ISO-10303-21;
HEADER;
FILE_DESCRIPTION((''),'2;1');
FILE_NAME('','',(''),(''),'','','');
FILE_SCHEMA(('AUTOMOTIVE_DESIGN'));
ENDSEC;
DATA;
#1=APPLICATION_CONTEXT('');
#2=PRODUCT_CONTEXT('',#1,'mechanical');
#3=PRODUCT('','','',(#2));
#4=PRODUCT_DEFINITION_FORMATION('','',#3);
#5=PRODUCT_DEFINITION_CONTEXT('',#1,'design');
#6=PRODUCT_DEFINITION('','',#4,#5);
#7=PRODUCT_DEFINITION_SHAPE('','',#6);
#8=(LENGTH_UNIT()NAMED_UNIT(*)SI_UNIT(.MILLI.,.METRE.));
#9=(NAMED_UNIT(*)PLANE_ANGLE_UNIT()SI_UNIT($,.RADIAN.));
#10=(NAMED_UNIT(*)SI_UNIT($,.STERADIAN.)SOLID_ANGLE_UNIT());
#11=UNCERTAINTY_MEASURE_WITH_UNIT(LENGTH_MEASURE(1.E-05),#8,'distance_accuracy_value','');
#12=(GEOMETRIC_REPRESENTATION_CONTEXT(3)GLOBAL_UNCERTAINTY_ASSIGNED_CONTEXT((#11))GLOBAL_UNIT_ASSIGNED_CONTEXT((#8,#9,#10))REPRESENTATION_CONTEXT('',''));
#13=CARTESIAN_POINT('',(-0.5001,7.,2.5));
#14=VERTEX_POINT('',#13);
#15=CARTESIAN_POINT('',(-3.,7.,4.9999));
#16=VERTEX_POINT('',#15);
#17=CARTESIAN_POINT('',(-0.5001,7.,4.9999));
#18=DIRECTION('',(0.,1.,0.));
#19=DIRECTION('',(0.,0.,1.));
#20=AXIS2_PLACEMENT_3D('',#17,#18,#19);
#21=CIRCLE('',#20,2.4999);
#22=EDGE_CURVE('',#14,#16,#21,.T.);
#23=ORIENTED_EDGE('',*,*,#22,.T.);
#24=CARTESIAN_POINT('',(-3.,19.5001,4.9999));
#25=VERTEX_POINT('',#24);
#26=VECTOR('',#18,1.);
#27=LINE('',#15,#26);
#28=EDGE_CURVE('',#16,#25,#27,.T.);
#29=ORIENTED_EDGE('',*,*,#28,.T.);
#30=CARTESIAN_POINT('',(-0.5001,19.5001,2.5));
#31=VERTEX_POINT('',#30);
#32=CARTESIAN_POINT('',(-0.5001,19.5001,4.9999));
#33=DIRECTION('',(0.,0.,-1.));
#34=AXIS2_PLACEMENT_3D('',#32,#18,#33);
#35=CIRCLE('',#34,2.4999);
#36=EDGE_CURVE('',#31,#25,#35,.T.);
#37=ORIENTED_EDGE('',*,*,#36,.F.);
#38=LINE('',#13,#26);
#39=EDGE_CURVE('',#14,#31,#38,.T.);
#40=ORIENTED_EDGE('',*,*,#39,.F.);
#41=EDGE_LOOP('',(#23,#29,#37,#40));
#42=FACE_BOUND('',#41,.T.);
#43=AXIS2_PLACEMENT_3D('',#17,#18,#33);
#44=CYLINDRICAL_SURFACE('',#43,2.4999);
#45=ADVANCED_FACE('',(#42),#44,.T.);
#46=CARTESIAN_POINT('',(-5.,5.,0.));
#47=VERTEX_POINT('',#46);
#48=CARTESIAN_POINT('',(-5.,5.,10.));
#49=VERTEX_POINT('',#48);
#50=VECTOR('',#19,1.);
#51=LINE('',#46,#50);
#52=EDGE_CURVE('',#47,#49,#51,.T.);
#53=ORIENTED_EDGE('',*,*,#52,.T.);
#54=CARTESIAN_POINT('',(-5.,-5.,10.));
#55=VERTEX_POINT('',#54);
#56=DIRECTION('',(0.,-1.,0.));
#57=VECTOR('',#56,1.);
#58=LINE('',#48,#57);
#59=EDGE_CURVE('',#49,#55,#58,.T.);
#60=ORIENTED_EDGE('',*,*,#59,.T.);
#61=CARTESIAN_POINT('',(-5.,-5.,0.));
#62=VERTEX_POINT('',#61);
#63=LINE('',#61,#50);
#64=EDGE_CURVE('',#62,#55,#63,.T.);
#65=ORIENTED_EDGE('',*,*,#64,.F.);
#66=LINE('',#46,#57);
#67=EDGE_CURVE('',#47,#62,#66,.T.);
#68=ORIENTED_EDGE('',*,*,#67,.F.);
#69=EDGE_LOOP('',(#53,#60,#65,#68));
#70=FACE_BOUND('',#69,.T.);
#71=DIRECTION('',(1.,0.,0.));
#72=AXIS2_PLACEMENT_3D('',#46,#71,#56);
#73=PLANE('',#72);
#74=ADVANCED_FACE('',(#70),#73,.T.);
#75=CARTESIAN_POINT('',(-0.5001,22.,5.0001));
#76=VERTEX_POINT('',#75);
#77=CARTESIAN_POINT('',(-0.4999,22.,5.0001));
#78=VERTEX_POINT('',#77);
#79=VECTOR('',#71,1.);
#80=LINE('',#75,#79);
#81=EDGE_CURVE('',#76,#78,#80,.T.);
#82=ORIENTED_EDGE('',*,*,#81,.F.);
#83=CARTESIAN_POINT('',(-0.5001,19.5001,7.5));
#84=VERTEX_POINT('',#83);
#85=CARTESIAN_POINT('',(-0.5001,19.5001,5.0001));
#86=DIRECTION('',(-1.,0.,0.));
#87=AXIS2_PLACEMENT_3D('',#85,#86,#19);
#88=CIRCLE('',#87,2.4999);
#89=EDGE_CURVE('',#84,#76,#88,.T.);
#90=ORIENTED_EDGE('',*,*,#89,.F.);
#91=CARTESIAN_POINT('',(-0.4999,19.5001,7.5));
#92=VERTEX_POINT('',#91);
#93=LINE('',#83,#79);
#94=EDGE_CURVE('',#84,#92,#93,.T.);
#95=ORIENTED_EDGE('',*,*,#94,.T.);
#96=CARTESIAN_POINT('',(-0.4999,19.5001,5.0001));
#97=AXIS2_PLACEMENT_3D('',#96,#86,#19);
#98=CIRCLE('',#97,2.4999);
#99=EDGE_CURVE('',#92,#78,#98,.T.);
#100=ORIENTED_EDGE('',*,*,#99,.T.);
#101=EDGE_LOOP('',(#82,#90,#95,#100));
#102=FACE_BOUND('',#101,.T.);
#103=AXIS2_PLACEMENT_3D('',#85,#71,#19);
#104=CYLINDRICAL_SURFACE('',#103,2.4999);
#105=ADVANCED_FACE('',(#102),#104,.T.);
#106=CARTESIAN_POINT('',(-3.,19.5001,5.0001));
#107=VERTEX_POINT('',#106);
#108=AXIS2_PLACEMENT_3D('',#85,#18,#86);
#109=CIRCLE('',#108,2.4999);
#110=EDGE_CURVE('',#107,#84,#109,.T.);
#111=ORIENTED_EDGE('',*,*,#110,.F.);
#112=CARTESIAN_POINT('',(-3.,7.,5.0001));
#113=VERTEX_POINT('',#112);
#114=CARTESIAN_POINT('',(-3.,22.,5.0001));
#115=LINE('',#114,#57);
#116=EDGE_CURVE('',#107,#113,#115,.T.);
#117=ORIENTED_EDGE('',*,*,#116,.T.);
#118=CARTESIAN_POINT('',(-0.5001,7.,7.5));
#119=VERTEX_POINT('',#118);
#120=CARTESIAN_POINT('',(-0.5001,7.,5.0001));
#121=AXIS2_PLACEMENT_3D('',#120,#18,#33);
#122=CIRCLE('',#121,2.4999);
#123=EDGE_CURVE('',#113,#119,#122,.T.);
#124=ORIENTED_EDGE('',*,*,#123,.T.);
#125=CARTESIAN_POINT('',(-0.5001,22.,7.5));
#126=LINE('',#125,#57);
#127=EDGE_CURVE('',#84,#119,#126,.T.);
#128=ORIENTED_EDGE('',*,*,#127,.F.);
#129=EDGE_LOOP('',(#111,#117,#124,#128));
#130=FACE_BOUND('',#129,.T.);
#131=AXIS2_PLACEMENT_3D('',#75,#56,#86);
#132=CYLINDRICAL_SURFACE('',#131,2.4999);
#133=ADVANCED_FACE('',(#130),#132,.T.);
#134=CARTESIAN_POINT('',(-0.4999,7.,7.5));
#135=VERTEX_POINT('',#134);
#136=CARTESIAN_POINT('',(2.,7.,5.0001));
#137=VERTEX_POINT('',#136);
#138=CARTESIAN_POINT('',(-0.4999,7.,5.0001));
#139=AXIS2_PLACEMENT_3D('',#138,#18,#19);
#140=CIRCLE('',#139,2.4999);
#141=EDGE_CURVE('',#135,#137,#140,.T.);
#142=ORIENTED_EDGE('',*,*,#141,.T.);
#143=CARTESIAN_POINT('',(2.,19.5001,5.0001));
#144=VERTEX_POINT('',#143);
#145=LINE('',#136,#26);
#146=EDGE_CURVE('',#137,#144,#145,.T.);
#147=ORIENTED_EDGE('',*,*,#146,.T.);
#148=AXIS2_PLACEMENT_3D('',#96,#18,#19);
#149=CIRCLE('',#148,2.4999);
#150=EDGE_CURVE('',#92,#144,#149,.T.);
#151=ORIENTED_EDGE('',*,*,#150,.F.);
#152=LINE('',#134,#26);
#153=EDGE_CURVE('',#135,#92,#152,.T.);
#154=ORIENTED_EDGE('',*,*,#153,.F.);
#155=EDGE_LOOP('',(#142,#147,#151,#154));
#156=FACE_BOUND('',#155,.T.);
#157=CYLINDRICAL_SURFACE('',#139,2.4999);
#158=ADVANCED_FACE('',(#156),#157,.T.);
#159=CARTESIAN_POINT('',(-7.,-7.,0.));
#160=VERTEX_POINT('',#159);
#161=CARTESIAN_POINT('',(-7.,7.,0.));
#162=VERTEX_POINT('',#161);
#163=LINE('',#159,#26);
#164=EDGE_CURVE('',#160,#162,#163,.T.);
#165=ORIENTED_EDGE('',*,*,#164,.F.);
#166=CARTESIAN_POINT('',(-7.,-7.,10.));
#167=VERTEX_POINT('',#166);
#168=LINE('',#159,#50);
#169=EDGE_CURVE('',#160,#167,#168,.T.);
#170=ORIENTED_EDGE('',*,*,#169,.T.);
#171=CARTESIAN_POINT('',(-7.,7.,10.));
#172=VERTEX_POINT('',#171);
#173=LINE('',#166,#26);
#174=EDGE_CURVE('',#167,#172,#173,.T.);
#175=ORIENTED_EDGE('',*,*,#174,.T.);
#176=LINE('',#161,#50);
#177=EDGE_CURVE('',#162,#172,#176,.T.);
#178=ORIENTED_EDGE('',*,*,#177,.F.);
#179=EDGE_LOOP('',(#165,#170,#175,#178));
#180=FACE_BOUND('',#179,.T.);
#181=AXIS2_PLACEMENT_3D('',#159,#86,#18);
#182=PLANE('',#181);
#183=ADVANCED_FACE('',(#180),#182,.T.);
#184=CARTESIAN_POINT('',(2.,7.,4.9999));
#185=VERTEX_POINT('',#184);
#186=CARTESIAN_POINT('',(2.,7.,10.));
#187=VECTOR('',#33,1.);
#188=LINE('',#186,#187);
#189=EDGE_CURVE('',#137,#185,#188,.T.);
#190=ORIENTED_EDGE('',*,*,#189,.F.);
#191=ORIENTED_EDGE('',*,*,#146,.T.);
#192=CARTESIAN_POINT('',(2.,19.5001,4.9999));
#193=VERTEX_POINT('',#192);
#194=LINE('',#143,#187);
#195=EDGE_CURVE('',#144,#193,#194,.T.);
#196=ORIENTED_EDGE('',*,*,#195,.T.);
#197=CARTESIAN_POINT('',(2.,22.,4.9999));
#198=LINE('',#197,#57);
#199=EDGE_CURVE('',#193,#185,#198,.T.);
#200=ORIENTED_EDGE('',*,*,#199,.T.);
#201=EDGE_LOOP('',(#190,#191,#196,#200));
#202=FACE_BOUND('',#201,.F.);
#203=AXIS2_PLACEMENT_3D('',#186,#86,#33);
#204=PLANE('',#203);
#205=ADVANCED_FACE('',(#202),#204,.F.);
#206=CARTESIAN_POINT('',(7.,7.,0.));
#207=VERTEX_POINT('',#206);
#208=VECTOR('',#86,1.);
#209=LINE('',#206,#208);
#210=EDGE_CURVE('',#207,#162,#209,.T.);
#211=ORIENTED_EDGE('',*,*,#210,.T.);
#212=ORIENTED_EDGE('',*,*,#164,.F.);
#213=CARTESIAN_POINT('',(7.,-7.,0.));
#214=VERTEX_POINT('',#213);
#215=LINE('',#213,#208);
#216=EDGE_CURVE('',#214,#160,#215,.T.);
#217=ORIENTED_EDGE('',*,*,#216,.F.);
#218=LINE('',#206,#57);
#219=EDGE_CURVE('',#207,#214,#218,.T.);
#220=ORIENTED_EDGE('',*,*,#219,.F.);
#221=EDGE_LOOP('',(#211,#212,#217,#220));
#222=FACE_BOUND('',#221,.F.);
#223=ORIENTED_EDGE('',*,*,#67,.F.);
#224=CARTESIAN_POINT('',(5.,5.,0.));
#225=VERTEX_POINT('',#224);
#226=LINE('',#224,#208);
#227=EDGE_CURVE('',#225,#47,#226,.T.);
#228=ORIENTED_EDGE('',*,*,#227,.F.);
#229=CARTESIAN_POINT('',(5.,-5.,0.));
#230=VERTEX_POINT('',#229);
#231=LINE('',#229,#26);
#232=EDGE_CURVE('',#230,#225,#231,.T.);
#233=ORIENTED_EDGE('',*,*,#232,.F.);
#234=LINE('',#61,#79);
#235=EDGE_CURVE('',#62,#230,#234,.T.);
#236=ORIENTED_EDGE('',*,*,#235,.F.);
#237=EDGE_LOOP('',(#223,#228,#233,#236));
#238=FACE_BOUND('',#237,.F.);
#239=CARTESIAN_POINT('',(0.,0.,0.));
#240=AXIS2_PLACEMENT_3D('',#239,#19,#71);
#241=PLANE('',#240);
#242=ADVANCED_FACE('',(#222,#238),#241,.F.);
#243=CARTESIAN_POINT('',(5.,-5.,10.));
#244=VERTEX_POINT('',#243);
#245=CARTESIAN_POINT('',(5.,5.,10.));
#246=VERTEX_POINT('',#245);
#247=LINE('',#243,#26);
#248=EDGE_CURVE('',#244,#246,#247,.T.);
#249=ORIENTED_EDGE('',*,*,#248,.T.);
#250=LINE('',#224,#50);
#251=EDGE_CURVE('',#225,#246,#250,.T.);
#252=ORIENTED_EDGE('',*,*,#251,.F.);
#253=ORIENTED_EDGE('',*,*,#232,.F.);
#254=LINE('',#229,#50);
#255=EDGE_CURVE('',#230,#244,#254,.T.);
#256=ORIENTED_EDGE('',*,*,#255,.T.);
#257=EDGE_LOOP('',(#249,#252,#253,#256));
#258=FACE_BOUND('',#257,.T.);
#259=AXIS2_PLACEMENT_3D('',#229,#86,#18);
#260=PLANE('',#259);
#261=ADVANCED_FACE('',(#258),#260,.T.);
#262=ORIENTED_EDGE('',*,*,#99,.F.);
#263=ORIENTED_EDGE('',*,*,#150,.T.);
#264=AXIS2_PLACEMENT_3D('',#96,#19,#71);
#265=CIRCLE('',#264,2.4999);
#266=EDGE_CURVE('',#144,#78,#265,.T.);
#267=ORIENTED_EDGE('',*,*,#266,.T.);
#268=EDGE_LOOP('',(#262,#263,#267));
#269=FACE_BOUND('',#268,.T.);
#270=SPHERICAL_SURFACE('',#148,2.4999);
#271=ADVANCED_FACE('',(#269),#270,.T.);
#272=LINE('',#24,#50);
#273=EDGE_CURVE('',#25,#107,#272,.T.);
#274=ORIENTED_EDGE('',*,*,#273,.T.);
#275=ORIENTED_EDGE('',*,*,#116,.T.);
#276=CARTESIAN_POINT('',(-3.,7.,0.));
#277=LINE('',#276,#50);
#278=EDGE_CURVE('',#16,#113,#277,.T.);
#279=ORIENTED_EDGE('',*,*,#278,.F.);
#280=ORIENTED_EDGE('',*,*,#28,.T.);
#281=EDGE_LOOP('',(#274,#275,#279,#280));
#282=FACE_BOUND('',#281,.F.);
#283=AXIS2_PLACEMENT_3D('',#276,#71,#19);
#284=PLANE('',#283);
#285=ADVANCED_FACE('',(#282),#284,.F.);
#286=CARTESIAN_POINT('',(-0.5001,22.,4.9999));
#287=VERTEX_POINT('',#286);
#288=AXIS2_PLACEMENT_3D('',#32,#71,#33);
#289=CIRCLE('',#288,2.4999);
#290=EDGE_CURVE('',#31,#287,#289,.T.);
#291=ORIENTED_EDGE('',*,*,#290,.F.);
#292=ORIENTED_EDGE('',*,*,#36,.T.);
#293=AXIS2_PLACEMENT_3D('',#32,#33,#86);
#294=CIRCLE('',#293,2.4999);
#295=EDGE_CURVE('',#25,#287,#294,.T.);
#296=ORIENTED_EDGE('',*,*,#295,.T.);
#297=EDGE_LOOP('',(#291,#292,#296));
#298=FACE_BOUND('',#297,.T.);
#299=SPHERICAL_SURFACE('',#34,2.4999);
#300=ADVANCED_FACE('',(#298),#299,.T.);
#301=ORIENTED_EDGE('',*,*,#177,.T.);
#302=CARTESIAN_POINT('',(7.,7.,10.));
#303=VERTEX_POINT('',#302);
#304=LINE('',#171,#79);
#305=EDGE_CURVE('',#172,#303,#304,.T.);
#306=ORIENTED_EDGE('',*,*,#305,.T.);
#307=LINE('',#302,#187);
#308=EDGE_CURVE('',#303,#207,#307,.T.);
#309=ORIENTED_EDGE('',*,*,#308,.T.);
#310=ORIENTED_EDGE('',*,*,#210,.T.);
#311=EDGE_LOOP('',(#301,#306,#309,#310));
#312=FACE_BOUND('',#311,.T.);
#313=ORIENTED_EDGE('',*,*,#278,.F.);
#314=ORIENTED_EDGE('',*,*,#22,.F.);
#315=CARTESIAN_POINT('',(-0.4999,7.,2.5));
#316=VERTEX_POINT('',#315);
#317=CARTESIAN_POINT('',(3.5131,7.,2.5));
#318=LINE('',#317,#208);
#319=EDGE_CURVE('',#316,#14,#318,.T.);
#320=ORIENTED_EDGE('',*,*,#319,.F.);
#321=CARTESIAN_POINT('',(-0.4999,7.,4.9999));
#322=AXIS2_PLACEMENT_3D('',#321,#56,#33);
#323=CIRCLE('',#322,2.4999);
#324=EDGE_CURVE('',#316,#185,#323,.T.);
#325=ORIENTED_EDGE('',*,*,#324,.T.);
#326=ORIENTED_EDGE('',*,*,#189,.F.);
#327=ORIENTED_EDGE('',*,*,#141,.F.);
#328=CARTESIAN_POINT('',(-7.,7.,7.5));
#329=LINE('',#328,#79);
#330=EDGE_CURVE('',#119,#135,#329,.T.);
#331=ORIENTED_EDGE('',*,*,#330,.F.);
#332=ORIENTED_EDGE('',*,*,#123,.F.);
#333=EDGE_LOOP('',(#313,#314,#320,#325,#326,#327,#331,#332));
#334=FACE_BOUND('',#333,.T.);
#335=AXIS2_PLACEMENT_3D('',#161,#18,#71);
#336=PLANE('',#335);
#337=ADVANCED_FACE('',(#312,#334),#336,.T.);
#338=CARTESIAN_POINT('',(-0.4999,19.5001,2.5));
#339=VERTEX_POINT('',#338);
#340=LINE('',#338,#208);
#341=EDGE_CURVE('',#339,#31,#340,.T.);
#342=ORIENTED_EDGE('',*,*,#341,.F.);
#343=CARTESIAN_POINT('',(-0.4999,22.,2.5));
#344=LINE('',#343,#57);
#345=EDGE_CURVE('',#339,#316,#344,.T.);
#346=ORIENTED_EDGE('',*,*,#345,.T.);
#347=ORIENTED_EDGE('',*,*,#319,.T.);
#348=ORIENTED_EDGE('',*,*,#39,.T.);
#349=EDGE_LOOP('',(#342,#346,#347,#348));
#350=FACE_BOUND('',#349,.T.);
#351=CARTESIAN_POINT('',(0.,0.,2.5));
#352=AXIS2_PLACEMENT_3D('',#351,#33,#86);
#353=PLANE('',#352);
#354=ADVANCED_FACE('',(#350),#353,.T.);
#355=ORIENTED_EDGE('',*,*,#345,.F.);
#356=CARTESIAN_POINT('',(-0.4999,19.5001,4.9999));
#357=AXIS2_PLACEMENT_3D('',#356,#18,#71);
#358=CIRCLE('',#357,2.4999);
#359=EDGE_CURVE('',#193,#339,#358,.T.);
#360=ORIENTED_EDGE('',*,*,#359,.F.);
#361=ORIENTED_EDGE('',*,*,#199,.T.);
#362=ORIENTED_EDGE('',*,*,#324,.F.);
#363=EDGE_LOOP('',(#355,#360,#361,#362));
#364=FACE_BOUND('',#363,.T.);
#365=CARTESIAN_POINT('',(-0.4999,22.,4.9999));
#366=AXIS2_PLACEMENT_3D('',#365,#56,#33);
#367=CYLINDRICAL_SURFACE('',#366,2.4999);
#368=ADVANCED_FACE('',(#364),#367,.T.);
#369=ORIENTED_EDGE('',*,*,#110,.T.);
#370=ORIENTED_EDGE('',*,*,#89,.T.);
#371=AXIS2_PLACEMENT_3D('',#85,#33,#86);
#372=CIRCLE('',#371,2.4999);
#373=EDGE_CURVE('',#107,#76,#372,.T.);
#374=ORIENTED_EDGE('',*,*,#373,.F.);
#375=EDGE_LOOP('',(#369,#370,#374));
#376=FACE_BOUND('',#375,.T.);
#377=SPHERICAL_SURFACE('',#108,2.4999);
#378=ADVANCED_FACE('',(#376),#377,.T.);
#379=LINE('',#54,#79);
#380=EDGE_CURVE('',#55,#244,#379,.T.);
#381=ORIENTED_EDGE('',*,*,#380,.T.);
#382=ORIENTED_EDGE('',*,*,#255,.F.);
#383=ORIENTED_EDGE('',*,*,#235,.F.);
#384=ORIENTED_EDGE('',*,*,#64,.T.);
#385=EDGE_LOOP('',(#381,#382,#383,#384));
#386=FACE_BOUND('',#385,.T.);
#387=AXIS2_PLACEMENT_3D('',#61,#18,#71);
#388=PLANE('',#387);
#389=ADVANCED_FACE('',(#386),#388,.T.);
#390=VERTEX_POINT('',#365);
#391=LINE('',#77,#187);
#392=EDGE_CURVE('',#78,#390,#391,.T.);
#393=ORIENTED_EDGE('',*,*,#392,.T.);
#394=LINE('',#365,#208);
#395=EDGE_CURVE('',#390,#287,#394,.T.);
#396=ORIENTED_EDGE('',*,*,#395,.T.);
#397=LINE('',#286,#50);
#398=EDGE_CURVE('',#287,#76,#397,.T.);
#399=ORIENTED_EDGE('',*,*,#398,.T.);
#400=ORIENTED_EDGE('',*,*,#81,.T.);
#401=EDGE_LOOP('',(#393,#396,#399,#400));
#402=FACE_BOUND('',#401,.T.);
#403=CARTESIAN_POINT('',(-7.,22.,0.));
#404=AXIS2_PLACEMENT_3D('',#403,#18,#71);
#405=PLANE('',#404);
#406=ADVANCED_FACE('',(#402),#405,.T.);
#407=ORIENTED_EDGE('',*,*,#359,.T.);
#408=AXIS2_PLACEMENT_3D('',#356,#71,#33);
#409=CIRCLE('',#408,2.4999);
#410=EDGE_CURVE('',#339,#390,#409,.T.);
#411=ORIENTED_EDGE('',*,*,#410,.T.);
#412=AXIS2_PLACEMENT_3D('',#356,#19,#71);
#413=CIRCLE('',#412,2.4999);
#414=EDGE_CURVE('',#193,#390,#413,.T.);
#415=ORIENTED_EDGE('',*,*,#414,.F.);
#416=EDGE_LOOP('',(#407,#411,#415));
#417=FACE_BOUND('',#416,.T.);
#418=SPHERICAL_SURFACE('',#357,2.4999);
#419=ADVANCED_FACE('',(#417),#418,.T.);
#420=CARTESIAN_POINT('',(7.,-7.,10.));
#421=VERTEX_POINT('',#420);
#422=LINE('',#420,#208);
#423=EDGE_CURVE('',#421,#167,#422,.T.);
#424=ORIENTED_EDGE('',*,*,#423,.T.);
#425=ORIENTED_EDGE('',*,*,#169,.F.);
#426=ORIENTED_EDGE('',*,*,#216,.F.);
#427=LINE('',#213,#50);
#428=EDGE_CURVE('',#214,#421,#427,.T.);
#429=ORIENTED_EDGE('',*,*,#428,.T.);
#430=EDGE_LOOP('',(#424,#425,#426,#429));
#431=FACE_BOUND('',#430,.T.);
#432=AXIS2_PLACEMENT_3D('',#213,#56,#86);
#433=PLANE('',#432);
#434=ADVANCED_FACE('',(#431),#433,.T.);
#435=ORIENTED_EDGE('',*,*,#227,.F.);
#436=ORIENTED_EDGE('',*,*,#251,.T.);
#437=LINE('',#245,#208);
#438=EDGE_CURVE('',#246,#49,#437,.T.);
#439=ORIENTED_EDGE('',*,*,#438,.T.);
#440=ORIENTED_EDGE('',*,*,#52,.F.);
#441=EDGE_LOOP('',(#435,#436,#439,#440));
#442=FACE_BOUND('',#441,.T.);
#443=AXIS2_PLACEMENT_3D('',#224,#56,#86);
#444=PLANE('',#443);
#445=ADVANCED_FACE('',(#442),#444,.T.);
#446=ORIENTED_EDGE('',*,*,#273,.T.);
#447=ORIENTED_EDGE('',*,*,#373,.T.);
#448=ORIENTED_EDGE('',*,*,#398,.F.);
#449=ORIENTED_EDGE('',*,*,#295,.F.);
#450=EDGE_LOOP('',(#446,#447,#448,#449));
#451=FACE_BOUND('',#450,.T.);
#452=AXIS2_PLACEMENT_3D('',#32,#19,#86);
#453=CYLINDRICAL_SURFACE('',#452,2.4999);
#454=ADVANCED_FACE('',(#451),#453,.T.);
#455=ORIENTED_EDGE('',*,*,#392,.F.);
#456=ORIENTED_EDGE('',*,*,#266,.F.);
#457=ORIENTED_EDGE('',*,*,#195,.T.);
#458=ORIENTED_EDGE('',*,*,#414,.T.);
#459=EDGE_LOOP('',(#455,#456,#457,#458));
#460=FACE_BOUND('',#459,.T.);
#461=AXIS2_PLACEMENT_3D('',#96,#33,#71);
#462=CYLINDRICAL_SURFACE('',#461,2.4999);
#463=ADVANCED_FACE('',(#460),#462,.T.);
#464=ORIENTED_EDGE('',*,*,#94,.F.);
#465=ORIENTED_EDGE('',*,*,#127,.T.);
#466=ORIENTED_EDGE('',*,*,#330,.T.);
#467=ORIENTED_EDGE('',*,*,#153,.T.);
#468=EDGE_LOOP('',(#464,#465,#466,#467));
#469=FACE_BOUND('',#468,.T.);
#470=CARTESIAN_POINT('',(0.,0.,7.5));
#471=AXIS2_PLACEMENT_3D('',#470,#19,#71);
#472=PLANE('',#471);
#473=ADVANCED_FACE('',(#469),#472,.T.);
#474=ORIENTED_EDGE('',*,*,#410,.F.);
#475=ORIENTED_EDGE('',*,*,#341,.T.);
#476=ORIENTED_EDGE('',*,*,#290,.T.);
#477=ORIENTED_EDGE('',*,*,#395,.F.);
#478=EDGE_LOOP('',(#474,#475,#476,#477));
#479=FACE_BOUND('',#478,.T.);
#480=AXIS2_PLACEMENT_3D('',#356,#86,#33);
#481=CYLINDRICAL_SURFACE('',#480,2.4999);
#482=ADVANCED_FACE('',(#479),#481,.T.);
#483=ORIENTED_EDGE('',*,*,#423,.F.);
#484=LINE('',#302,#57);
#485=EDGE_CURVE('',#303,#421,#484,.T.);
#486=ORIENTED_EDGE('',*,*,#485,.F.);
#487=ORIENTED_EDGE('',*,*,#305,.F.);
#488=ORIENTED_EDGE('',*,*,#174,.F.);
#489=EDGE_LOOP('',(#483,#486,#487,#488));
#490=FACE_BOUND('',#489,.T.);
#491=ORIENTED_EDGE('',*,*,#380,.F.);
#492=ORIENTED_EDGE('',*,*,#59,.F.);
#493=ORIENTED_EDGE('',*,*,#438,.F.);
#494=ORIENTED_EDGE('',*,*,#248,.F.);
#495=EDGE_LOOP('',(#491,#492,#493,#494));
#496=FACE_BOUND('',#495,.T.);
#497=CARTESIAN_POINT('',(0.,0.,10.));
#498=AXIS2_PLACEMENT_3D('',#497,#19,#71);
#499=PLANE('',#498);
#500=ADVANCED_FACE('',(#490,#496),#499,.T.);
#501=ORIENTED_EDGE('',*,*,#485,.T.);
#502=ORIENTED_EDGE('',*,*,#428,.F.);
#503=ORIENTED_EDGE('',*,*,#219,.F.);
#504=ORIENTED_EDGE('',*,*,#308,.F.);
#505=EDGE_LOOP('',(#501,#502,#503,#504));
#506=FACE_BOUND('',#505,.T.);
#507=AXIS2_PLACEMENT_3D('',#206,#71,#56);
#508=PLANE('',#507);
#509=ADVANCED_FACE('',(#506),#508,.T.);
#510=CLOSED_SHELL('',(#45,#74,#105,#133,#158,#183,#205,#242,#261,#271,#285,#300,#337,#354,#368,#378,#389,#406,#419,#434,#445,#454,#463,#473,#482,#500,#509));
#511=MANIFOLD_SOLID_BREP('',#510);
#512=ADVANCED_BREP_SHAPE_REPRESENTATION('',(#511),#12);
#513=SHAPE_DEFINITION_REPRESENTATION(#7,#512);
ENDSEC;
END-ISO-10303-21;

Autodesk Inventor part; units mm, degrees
ref_plane "YZ Plane" through (0, 0, 0) normal (1, 0, 0) x (0, 1, 0)
ref_plane "XZ Plane" through (0, 0, 0) normal (0, 1, 0) x (-1, 0, 0)
ref_plane "XY Plane" through (0, 0, 0) normal (0, 0, 1) x (1, 0, 0)
sketch "草圖1" plane through (0, 0, 0) normal (0, 0, 1) x (1, 0, 0)
  line L0 (-5, -5) -> (5, -5)
  line L1 (5, -5) -> (5, 5)
  line L2 (5, 5) -> (-5, 5)
  line L3 (-5, 5) -> (-5, -5)
  line L4 (-5, -5) -> (5, 5) construction
  line L5 (5, -5) -> (-5, 5) construction
  line L6 (-7, 7) -> (7, 7)
  line L7 (7, 7) -> (7, -7)
  line L8 (7, -7) -> (-7, -7)
  line L9 (-7, -7) -> (-7, 7)
  point P0 (0, 0)
  dimension "d0" = 10
  dimension "d1" = 10
  dimension "d2" = 2
extrude "擠出1" add sketch "草圖1" along normal blind 10
sketch "草圖2" plane through (-7, 7, 0) normal (0, 1, 0) x (1, 0, 0)
  line L0 (2, -10) -> (12, -10) projected
  line L1 (12, 0) -> (2, 0) projected
  line L2 (4, -10) -> (9, -10)
  line L3 (9, -10) -> (9, 0)
  line L4 (9, 0) -> (4, 0)
  line L5 (4, 0) -> (4, -10)
  line L6 (14, 0) -> (14, -10) projected
  point P0 (7, 0)
  dimension "d5" = 5
  dimension "d6" = 5
extrude "擠出2" add sketch "草圖2" along normal blind 15
sketch "草圖3" plane through (0, 0, 10) normal (0, 0, 1) x (1, 0, 0)
  line L0 (-7, 7) -> (-3, 7) projected
  line L1 (-7, 7) -> (8.7829, 7)
  line L2 (8.7829, 7) -> (8.7829, 28.6907)
  line L3 (8.7829, 28.6907) -> (-7, 28.6907)
  line L4 (-7, 28.6907) -> (-7, 7)
  point P0 (0, 0)
extrude "擠出3" cut sketch "草圖3" against normal blind 2.5
sketch "草圖4" plane through (0, 0, 0) normal (0, 0, -1) x (-1, 0, 0)
  line L0 (-2, 7) -> (-7, 7) projected
  line L1 (-3.5131, 7) -> (8.3925, 7)
  line L2 (8.3925, 7) -> (8.3925, 27.422)
  line L3 (8.3925, 27.422) -> (-3.5131, 27.422)
  line L4 (-3.5131, 27.422) -> (-3.5131, 7)
  point P0 (0, 0)
extrude "擠出4" cut sketch "草圖4" against normal blind 2.5
fillet "圓角2" radius 2.5 4 edges at (-3, 14.5, 7.5) (2, 14.5, 7.5) (2, 14.5, 2.5) (-3, 14.5, 2.5)
fillet "圓角3" radius 2.5 3 edges at (-3, 22, 5) (-2.2678, 22, 6.7678) (-0.5, 22, 7.5)
properties part number "軸滑塊"
